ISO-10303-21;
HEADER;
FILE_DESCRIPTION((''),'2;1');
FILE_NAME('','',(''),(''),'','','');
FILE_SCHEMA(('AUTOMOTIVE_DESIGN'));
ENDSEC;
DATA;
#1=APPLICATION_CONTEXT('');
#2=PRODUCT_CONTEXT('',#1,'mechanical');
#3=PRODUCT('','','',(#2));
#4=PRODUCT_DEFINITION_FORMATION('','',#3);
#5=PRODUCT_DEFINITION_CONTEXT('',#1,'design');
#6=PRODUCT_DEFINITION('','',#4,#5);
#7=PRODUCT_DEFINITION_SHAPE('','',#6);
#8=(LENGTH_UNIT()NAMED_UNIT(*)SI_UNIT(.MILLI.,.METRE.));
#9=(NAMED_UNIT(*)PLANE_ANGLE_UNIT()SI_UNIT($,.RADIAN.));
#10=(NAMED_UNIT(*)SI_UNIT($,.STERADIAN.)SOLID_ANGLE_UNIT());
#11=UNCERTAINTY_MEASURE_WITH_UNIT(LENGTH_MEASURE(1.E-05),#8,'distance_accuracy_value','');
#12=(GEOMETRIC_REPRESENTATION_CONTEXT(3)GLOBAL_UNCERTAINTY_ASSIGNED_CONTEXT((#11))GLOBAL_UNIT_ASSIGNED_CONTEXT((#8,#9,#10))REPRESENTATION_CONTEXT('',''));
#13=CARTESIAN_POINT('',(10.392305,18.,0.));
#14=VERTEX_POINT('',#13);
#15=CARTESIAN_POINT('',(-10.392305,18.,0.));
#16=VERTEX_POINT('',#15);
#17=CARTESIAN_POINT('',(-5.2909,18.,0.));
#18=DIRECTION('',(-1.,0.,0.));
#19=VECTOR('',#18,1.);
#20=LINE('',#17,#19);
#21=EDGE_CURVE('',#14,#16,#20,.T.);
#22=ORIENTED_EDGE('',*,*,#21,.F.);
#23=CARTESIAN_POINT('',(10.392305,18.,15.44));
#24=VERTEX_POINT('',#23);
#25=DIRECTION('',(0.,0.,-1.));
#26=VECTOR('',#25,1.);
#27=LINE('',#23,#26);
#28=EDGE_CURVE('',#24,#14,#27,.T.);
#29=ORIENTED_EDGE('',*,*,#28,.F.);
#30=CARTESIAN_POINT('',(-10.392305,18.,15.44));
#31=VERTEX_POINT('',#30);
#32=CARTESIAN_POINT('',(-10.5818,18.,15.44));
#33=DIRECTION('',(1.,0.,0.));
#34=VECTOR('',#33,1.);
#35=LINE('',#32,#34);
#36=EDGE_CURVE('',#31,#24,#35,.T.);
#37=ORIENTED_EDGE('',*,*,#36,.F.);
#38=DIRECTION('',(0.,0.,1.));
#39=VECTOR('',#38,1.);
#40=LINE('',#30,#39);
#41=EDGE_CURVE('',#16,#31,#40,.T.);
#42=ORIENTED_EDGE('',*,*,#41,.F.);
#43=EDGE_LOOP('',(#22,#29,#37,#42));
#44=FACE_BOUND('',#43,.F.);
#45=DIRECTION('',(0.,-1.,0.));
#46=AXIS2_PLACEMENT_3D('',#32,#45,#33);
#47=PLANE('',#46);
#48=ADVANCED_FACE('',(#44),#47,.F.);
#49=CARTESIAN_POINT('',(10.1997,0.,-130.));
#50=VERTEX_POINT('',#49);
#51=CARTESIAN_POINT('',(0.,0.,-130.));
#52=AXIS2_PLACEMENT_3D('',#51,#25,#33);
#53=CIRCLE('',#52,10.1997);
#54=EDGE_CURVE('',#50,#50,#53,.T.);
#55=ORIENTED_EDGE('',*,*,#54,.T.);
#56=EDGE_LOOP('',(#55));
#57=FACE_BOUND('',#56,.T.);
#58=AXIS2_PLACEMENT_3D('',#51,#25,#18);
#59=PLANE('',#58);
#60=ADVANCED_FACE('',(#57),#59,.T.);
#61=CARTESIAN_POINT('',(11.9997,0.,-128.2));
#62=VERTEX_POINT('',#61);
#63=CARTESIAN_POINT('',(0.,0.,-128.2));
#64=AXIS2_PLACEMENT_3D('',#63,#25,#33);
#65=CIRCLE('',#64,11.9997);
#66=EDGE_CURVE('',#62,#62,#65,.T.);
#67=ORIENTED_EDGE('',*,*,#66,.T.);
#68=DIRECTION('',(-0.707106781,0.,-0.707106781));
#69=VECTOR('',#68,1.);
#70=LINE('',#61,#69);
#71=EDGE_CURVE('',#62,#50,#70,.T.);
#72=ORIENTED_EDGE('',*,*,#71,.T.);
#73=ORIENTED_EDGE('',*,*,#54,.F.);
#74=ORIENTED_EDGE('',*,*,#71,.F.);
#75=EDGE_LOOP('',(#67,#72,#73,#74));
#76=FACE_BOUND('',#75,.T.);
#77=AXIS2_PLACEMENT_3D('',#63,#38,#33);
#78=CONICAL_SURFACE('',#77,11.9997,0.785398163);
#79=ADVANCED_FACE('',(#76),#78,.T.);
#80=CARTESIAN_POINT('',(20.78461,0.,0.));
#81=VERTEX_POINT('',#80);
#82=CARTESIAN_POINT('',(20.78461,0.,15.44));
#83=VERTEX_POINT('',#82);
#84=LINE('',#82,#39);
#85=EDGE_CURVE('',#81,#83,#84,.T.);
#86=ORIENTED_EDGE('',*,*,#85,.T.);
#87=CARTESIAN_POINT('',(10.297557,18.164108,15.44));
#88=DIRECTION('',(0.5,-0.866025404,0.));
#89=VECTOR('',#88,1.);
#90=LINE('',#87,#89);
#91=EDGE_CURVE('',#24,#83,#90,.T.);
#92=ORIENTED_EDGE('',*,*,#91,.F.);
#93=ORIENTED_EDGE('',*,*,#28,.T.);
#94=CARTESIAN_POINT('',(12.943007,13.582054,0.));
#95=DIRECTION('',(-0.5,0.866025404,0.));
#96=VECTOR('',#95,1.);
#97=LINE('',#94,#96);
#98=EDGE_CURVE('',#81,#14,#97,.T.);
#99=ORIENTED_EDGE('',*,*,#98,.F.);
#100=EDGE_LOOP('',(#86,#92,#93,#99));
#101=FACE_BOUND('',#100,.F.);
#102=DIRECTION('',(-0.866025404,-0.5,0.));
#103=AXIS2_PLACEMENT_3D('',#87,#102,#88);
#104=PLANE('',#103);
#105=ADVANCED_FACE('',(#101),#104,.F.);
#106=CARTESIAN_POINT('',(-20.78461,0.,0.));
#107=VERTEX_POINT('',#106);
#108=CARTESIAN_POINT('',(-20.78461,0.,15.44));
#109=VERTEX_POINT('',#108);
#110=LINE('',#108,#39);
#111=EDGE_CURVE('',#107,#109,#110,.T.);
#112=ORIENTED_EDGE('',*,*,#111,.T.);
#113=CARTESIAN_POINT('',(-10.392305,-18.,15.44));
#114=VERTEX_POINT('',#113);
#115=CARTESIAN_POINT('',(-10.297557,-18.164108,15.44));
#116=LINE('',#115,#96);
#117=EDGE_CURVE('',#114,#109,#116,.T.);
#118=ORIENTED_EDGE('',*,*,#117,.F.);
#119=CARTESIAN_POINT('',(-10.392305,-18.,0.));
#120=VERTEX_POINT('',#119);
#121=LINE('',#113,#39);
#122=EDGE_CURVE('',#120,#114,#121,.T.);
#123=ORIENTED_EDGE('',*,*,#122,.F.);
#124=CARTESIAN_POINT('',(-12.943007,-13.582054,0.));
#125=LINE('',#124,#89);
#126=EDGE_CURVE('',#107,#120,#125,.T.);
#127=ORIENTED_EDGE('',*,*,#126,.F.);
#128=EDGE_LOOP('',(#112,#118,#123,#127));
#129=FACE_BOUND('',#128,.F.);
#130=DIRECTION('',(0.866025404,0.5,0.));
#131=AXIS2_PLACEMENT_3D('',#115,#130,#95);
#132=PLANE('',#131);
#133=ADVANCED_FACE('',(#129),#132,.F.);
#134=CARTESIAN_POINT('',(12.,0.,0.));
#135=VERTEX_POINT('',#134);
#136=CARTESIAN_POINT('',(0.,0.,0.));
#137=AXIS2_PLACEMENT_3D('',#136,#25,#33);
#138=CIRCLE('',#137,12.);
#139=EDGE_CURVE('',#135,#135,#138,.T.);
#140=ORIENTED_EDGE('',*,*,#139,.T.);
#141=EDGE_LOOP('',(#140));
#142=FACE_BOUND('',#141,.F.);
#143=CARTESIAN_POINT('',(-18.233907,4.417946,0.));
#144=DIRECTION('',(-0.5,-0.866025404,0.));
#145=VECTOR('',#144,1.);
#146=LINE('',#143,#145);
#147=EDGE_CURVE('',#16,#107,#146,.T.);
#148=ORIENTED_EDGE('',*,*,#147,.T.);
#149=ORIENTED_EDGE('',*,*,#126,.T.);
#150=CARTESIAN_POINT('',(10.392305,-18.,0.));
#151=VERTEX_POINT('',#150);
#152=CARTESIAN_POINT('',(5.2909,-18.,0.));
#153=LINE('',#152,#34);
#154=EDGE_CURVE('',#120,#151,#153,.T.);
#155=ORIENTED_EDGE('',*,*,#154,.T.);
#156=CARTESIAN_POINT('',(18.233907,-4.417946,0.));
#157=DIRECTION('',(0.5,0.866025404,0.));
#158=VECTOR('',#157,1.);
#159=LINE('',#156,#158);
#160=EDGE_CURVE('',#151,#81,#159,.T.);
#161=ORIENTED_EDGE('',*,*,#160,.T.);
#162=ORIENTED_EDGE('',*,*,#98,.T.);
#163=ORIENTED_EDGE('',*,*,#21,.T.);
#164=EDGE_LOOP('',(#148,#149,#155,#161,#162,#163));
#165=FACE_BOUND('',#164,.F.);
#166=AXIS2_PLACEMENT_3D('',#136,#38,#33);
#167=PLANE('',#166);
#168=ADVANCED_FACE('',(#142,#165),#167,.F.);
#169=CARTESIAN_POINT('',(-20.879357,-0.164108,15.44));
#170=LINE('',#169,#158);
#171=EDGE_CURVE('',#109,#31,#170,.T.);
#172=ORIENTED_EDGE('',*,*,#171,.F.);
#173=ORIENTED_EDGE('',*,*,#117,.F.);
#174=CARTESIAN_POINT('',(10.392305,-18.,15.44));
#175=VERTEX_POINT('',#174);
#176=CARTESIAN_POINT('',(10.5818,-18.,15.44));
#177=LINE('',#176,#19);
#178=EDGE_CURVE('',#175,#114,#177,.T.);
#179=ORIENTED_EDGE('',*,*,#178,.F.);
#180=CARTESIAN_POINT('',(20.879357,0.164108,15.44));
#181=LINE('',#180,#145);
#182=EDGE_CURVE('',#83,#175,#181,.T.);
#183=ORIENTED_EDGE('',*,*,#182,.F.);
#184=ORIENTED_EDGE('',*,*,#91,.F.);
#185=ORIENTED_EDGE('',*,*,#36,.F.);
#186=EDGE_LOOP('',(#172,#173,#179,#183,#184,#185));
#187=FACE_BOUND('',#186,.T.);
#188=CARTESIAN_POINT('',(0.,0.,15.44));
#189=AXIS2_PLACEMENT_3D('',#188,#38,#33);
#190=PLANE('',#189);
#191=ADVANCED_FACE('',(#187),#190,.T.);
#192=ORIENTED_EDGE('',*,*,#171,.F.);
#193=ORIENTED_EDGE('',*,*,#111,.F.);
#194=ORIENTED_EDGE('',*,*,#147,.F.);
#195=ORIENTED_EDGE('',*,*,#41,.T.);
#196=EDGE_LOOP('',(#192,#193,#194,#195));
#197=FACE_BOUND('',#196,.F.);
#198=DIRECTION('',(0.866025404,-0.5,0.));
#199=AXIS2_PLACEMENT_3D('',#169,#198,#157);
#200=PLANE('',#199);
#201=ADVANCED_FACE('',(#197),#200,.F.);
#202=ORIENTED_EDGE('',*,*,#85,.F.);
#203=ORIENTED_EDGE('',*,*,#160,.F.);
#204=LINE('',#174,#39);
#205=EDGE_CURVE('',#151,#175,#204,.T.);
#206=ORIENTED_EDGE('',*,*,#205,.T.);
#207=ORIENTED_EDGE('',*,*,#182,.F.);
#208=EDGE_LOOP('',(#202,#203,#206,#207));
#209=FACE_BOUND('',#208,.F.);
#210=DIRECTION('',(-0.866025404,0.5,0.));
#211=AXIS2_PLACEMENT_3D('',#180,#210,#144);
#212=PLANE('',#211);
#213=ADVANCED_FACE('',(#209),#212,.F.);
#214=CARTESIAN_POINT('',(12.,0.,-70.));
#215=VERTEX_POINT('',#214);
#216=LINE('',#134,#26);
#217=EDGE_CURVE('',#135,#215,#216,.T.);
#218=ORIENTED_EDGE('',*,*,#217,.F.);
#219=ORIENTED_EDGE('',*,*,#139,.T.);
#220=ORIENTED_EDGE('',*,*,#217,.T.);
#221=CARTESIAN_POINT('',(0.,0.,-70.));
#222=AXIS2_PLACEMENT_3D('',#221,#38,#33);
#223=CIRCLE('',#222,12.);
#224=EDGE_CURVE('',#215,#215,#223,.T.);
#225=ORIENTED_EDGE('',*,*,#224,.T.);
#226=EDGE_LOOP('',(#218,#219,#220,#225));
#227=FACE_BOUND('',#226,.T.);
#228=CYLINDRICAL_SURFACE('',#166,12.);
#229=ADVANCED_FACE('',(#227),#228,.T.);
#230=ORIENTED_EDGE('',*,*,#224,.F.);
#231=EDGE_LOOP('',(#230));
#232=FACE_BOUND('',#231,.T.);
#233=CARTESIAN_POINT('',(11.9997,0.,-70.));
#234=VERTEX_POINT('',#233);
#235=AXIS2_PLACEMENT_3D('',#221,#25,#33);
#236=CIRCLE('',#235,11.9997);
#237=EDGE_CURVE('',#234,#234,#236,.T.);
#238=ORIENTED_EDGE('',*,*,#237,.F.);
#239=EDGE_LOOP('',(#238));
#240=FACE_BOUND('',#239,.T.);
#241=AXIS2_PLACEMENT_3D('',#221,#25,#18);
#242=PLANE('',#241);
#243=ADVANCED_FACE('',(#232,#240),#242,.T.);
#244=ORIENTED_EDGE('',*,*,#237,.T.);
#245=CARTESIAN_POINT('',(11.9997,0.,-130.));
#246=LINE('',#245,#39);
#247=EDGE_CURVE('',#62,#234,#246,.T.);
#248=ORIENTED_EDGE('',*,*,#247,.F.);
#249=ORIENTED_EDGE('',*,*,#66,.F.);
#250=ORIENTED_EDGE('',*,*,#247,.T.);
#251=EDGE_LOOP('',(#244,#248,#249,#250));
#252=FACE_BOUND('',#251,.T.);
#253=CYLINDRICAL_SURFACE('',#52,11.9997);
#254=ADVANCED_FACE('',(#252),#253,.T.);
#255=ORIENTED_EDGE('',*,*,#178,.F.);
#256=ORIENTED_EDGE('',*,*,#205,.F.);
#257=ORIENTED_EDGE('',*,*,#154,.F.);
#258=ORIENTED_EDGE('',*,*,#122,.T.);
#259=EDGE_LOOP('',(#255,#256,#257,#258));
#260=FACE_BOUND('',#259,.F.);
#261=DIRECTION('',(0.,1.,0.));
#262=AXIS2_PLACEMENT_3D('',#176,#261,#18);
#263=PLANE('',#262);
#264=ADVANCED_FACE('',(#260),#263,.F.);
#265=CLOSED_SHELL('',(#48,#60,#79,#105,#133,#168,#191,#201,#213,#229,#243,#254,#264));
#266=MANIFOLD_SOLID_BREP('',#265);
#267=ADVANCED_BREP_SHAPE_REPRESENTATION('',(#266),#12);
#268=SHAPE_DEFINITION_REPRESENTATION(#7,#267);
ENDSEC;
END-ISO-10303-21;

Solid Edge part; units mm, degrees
sketch "Sketch1" plane through (0, 0, 0) normal (0, 0, 1) x (1, 0, 0)
  circle A0 centre (0, 0) radius 20.88
  dimension "D1" = 41.76
extrude "Protrusion1" add sketch "Sketch1" along normal blind 15.44
sketch "Sketch2" plane through (0, 0, 0) normal (0, 0, -1) x (1, 0, 0)
  circle A0 centre (0, 0) radius 12
extrude "Protrusion2" add sketch "Sketch2" along normal blind 130
sketch "Sketch3" plane through (0, 0, -130) normal (0, 0, -1) x (1, 0, 0)
  circle A0 centre (0, 0) radius 11.9997
extrude "Cutout1" cut sketch "Sketch3" against normal blind 60 flip side to cut
chamfer "Chamfer_1" distance 1.8 angle 45 1 edges at (-11.9997, 0, -130)
sketch "Sketch4" plane through (0, 0, 15.44) normal (0, 0, 1) x (1, 0, 0)
  line L0 (-10.5818, 18) -> (10.5818, 18)
  dimension "D1" = 36
extrude "Cutout2" cut sketch "Sketch4" against normal up to next material side at (0, 18.05, 15.44)
pattern_circular "Pattern1" count 6 over 360 about axis through (0, 0, 15.44) along (0, 0, 1) of "Cutout2"
properties part number "134635"
